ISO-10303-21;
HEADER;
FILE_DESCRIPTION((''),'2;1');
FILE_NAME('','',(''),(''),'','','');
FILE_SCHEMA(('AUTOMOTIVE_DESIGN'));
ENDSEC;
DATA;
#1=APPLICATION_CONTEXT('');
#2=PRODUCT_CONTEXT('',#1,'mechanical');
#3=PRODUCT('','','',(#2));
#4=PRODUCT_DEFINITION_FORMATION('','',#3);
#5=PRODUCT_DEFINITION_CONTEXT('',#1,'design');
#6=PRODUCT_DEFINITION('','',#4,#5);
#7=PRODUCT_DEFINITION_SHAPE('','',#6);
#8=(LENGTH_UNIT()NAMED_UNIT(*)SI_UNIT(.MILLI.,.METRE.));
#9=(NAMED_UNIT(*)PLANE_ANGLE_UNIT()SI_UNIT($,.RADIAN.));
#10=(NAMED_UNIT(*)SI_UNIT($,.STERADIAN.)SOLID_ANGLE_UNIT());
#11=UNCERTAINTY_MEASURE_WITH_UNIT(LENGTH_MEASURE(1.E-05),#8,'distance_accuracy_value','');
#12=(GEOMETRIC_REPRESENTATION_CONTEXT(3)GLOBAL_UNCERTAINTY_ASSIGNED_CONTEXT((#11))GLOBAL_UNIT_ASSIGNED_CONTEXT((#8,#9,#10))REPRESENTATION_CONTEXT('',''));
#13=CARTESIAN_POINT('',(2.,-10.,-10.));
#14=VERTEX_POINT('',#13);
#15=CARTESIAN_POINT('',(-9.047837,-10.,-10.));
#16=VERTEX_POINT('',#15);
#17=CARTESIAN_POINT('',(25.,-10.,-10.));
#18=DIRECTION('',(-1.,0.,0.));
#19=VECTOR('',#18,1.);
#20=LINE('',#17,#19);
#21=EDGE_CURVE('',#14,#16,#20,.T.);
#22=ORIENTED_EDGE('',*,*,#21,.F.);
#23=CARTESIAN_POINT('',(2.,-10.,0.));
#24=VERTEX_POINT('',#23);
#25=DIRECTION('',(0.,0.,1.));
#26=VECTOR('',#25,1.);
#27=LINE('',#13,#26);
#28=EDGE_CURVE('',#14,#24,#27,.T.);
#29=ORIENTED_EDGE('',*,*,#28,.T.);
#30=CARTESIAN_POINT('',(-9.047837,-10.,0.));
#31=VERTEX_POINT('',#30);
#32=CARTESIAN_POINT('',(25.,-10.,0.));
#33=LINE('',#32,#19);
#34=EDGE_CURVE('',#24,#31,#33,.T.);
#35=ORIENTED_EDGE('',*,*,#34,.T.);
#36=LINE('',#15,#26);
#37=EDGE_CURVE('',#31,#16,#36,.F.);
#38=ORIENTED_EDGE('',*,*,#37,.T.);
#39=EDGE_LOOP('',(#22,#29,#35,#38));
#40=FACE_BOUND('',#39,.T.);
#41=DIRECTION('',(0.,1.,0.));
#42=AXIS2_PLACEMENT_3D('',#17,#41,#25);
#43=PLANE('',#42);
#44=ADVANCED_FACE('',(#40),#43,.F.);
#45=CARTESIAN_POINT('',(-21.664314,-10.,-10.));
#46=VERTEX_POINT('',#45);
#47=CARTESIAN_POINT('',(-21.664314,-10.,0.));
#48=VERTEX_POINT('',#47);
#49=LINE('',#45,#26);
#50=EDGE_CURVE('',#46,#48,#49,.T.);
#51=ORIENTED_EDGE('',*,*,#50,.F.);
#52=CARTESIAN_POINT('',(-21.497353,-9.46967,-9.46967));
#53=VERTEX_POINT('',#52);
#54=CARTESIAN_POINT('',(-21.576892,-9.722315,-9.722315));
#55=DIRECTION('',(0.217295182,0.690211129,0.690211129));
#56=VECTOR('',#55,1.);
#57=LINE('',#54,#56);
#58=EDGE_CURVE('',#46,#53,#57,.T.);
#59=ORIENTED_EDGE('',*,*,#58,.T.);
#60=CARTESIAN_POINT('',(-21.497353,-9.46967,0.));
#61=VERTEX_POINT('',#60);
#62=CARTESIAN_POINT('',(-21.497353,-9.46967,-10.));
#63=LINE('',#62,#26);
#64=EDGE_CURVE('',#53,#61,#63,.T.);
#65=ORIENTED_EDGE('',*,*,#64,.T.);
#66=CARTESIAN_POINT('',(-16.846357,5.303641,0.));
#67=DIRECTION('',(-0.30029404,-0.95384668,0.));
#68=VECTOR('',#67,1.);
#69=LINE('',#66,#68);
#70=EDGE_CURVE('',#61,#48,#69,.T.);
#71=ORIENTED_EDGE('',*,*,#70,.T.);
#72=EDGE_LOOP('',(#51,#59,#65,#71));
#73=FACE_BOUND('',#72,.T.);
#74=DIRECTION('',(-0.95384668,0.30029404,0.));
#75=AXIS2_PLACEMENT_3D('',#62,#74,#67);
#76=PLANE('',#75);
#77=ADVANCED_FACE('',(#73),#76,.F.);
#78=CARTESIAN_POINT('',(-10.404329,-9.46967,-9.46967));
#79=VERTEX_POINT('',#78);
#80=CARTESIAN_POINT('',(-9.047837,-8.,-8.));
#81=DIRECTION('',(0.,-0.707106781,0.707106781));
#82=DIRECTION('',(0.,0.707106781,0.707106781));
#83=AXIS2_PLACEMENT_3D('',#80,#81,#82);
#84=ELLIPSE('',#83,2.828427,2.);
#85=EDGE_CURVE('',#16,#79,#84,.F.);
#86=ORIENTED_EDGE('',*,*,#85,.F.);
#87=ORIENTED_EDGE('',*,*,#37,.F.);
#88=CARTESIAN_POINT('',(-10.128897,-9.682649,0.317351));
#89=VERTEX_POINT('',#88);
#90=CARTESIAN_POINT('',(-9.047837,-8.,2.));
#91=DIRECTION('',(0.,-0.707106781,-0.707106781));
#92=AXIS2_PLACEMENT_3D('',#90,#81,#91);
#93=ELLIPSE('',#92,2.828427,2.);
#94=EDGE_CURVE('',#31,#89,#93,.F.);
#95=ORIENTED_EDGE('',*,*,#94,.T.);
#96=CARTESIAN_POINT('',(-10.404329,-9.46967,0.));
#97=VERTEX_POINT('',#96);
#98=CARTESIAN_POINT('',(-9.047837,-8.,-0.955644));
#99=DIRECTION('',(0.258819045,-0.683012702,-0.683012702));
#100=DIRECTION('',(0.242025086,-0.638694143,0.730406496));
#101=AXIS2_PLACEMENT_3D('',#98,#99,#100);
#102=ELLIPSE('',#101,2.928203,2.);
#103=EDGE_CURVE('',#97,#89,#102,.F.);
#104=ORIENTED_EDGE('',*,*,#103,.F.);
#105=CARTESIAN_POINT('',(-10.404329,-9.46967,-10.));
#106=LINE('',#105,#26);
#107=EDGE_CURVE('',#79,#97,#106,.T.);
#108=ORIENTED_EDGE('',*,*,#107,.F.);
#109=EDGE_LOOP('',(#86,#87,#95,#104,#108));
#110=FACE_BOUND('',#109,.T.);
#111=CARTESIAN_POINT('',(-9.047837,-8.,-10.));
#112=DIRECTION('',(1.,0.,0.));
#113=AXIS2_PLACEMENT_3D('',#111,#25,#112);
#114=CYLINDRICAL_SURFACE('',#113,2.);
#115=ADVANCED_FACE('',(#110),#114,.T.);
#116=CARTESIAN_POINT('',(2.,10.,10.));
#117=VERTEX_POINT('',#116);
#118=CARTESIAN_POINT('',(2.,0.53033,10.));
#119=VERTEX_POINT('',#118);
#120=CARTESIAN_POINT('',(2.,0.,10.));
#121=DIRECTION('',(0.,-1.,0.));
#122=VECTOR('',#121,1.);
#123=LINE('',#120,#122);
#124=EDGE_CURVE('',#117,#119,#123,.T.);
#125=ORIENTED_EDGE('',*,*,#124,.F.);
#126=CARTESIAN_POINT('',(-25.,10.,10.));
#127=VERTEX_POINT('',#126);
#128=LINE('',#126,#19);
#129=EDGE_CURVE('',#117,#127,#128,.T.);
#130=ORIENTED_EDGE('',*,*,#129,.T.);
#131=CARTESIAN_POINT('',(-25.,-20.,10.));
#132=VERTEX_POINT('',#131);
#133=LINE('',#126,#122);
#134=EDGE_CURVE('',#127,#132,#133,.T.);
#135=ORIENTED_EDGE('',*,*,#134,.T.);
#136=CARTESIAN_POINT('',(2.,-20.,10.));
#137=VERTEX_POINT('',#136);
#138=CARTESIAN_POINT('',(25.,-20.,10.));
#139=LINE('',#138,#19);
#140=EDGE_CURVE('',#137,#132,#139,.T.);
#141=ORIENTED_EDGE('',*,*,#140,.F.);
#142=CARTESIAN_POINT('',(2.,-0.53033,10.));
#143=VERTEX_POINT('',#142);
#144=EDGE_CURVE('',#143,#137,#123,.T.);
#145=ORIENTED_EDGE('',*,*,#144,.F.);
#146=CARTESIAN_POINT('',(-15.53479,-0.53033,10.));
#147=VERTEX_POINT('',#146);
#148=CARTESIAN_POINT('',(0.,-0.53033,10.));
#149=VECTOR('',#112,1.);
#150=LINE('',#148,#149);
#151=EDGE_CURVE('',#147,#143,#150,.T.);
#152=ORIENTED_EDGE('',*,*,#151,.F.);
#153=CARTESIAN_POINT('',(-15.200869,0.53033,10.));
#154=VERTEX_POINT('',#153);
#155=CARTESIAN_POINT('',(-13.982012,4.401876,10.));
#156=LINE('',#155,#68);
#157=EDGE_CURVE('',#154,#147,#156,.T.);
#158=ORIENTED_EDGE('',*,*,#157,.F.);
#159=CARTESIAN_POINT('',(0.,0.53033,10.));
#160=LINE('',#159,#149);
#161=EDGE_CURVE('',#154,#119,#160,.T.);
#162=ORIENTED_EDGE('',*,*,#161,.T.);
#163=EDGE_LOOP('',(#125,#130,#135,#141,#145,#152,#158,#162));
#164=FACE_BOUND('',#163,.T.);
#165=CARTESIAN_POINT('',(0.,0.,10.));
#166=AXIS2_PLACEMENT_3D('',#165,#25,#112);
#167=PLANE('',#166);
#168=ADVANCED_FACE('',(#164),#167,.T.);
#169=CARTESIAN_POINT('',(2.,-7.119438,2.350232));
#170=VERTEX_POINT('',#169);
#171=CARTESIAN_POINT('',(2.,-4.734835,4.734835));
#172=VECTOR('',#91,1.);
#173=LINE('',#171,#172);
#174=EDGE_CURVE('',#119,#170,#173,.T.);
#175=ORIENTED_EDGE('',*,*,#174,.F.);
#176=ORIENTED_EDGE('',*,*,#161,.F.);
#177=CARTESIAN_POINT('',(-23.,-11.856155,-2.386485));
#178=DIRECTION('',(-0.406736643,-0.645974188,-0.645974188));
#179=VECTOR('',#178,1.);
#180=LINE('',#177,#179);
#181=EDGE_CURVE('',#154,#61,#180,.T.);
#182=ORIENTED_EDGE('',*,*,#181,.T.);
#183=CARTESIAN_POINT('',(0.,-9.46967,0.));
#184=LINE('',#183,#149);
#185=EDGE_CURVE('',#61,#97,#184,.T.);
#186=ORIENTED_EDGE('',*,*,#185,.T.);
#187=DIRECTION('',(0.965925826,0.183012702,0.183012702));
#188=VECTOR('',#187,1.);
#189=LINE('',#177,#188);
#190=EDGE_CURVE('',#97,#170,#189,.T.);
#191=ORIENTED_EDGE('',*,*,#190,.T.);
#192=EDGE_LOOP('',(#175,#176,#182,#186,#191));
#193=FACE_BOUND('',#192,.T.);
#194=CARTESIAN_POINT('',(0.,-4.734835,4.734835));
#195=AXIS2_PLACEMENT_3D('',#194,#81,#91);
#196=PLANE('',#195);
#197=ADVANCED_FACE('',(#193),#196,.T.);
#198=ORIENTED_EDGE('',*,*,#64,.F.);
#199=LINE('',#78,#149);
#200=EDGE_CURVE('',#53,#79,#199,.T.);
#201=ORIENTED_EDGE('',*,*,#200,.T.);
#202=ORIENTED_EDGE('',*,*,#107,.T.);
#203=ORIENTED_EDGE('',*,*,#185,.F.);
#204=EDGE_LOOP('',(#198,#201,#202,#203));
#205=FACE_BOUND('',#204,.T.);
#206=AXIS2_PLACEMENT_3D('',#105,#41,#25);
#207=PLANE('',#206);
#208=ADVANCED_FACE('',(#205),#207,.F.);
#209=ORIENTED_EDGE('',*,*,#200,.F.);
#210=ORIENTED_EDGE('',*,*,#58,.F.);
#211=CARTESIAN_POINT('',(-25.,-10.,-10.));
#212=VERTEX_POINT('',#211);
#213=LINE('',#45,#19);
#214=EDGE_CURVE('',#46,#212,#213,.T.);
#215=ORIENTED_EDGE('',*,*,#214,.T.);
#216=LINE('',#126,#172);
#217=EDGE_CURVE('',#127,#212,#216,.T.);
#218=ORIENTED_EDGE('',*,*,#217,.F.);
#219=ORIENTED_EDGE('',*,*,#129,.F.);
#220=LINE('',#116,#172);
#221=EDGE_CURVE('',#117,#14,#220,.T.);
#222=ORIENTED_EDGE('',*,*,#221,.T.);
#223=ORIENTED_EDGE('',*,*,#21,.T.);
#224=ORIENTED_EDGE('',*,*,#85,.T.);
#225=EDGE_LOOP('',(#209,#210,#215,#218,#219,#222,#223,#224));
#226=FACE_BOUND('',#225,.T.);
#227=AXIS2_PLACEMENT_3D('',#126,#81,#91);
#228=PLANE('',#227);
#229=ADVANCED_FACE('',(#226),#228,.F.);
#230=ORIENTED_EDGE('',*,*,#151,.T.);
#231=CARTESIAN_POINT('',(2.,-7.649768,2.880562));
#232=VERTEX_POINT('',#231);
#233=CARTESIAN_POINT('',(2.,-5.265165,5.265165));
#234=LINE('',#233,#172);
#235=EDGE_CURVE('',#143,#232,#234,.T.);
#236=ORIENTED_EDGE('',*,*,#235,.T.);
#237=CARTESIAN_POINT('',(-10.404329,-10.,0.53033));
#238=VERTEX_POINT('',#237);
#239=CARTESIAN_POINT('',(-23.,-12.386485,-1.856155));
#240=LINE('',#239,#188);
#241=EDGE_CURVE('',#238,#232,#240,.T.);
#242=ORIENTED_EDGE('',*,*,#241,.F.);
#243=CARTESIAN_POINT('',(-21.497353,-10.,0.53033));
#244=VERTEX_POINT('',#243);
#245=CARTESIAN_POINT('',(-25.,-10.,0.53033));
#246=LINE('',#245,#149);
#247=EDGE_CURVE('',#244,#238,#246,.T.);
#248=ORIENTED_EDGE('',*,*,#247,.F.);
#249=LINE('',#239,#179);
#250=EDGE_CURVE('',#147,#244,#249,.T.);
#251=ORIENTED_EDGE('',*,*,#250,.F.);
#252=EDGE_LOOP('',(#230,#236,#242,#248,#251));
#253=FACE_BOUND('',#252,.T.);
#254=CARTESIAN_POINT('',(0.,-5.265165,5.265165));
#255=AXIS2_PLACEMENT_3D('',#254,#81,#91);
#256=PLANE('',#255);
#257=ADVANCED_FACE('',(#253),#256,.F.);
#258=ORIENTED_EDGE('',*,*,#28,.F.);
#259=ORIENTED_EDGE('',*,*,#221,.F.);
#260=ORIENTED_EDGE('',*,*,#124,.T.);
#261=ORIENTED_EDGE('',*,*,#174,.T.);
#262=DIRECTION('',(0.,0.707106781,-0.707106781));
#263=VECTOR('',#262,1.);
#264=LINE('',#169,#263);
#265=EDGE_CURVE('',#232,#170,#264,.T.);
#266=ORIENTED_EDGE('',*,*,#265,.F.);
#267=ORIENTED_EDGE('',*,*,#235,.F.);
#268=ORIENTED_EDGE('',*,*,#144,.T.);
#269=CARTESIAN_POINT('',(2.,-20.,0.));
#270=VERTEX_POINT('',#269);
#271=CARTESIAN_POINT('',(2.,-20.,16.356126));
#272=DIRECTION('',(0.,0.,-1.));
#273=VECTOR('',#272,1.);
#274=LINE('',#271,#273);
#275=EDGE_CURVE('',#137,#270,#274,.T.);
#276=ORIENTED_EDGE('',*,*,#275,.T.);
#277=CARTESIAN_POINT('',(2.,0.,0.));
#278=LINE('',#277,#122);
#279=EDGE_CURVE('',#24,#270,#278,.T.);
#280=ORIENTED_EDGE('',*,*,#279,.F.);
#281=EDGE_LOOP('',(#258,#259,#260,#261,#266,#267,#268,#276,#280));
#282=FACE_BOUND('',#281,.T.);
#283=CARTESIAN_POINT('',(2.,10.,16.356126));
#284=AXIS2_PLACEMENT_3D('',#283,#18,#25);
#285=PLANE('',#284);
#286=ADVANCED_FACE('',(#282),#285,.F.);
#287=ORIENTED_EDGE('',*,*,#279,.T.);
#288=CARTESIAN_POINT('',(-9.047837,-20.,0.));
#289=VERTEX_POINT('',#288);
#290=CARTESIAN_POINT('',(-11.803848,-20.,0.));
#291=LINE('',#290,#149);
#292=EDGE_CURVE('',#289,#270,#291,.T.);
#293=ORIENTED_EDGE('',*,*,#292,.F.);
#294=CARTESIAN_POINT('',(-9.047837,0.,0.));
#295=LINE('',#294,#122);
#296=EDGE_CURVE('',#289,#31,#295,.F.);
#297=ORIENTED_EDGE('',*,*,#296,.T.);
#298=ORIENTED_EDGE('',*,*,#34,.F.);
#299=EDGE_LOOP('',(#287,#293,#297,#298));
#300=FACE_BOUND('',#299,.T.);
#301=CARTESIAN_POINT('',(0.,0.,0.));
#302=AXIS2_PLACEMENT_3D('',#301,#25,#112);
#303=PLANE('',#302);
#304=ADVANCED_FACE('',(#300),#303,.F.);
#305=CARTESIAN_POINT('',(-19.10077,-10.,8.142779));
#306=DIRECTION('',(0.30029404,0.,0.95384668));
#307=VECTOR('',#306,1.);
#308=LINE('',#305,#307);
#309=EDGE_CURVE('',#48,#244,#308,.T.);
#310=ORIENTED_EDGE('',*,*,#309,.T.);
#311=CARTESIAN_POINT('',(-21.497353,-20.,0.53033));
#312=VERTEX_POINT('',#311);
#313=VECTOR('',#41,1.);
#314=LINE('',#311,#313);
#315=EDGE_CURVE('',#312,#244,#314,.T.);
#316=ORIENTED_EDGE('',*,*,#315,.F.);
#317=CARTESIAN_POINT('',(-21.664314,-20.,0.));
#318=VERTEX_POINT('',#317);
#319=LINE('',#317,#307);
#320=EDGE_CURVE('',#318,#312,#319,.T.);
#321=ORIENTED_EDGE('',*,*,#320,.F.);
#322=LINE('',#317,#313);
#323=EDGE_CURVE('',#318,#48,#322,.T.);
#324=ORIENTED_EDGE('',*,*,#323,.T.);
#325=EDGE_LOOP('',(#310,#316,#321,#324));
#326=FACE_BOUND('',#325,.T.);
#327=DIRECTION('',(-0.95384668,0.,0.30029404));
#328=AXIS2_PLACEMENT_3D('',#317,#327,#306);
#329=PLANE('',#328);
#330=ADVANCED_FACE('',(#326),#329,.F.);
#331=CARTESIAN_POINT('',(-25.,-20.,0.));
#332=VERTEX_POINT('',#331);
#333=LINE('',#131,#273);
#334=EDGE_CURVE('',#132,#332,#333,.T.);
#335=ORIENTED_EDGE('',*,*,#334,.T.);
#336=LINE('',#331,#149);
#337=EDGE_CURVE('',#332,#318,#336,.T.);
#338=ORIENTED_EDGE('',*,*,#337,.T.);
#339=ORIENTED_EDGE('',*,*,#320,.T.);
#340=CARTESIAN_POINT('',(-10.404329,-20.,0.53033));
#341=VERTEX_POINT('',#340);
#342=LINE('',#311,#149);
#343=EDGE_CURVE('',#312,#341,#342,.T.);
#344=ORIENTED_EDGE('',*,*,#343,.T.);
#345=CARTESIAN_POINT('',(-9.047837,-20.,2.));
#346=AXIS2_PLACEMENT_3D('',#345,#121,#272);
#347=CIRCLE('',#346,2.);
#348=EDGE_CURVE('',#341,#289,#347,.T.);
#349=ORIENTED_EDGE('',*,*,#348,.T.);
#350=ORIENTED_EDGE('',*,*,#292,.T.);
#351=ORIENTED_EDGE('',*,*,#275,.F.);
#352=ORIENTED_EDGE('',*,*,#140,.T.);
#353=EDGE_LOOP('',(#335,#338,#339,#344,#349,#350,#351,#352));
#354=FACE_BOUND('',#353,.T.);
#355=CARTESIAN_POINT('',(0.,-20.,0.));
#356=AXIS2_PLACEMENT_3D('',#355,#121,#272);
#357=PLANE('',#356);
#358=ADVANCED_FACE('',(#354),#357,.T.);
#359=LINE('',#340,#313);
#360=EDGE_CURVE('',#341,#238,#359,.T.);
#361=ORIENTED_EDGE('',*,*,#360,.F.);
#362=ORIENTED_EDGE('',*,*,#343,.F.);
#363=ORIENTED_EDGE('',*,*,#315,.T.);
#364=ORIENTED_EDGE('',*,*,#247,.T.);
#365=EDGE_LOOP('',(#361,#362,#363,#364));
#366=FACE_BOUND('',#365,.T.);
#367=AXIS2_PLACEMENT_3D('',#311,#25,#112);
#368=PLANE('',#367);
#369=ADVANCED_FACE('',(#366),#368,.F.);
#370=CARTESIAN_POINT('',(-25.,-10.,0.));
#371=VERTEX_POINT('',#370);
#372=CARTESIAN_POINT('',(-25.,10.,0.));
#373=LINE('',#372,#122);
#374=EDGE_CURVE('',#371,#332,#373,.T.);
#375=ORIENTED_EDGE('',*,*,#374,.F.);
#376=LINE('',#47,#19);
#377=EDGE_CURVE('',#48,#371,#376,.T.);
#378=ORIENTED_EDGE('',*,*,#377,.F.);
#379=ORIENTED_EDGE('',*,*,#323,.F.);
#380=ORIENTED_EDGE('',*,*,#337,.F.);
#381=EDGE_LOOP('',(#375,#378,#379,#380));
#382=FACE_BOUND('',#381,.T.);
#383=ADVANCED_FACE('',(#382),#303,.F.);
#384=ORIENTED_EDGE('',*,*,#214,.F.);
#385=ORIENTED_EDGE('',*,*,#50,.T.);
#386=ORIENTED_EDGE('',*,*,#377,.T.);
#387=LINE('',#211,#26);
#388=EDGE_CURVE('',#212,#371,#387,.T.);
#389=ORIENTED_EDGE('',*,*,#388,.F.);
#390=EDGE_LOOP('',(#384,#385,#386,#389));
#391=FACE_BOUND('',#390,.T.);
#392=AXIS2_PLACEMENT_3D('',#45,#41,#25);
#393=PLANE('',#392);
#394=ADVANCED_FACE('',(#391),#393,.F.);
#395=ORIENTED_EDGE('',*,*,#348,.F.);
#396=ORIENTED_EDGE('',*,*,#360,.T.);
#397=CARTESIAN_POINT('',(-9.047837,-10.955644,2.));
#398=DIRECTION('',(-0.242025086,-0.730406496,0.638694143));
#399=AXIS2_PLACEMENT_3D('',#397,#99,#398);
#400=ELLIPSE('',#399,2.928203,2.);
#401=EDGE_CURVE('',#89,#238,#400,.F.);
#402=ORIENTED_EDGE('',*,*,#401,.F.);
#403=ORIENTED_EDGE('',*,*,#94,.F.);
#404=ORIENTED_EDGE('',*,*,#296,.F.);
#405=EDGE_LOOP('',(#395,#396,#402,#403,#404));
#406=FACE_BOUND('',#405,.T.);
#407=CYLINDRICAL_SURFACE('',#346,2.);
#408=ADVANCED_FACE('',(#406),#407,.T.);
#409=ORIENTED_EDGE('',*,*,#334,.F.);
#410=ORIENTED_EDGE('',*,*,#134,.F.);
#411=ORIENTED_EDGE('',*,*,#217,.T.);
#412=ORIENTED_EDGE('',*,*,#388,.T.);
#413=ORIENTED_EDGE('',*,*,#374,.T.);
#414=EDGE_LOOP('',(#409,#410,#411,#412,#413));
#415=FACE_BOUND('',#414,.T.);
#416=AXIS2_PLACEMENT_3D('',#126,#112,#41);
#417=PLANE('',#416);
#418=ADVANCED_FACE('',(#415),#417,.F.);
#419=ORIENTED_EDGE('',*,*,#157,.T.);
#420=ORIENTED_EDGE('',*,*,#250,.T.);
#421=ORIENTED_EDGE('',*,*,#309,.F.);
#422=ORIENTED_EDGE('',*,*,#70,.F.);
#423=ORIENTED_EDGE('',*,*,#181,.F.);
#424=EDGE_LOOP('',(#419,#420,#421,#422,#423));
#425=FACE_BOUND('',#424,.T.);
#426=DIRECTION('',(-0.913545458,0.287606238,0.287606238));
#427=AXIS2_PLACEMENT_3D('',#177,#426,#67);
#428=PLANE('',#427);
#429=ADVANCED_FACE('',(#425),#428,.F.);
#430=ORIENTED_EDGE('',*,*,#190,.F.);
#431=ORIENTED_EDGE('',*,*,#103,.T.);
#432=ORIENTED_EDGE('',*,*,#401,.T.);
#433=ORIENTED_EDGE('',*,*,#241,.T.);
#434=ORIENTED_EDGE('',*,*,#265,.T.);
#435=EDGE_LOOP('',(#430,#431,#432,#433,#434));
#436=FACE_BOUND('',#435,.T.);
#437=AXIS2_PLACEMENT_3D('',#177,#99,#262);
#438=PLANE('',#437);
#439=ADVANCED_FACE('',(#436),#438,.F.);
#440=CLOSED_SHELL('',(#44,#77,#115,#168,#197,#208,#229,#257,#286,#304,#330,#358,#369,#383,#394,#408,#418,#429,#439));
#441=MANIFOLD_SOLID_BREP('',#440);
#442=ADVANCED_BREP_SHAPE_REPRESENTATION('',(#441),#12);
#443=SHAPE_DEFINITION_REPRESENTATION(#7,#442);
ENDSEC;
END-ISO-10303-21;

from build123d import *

# Parameters (mm, degrees)
SKETCH1_W           = 50
SKETCH1_H           = 20
BOSS_EXTRUDE1_DEPTH = 10
CUT_EXTRUDE1_DEPTH  = 0.375
BOSS_EXTRUDE3_DEPTH = 10
BOSS_EXTRUDE4_DEPTH = 10
SKETCH5_W           = 25.687022838
SKETCH5_H           = 30.894675689
CUT_EXTRUDE3_DEPTH  = 41.311288741
CUT_EXTRUDE4_DEPTH  = 36.057096286
FILLET1_R           = 2
FILLET2_R           = 2


with BuildPart() as part:
    # Sketch1 → Boss-Extrude1 (new body)
    with BuildSketch(Plane.XY):
        Rectangle(SKETCH1_W, SKETCH1_H)
    extrude(amount=BOSS_EXTRUDE1_DEPTH)

    # Sketch2 → Cut-Extrude1 (cut, symmetric)
    with BuildSketch(Plane(origin=(0, -5, 5), x_dir=(1, 0, 0), z_dir=(0, -0.7071067811865464, 0.7071067811865488))):
        Polygon((-23, -10.071067812), (35.375550351, 5.570613762), (29.163893269, 28.752833593), (-10.439065609, 18.141252744), align=None)
    extrude(amount=CUT_EXTRUDE1_DEPTH, both=True, mode=Mode.SUBTRACT)

    # Sketch3 → Boss-Extrude3 (add)
    with BuildSketch(Plane.XZ.offset(10)):
        Polygon((-25, 0), (-21.664313944, 0), (-21.497353187, 0.530330086), (-10.404328524, 0.530330086), (-11.803847577, 0), (25, 0), (25, 10), (-25, 10), align=None)
    extrude(amount=BOSS_EXTRUDE3_DEPTH)

    # Sketch4 → Boss-Extrude4 (add)
    with BuildSketch(Plane(origin=(0, 0, 0), x_dir=(-1, 0, 0), z_dir=(0, 0, -1))):
        Polygon((10.404328524, -9.469669914), (21.497353187, -9.469669914), (21.664313944, -10), (25, -10), (25, 10), (-25, 10), (-25, -10), (11.803847577, -10), align=None)
    extrude(amount=BOSS_EXTRUDE4_DEPTH)

    # Sketch5 → Cut-Extrude3 (cut, through all)
    with BuildSketch(Plane.XZ.offset(20)):
        with Locations((14.843511419, 0.908787841)):
            Rectangle(SKETCH5_W, SKETCH5_H)
    extrude(amount=-CUT_EXTRUDE3_DEPTH, mode=Mode.SUBTRACT)

    # Sketch6 → Cut-Extrude4 (cut, through all)
    with BuildSketch(Plane(origin=(2, 0, 0), x_dir=(0, 0, -1), z_dir=(1, 0, 0))):
        Polygon((-10, 10), (10, -10), (10, 10), align=None)
    extrude(amount=-CUT_EXTRUDE4_DEPTH, mode=Mode.SUBTRACT)

    # Fillet1
    # the kernel refuses this fillet: 2 mm, written as the material it takes off along each edge
    with BuildSketch(Plane(origin=(-11.803847577, -10, 0), x_dir=(1, 0, 0), z_dir=(0, 0, -1))) as fillet1_piece_1:
        with BuildLine():
            CenterArc((2.756010978, -2), FILLET1_R, 90, 42.706727968)
            Line((1.399519053, -0.530330086), (0, 0))
            Line((0, 0), (2.756010978, 0))
        make_face()
    extrude(amount=16.890027445, mode=Mode.SUBTRACT)

    # Fillet2
    # the kernel refuses this fillet: 2 mm, written as the material it takes off along each edge
    with BuildSketch(Plane(origin=(-11.803847577, -3.109972555, 0), x_dir=(1, 0, 0), z_dir=(0, -1, 0))) as fillet2_piece_1_section:
        with BuildLine():
            CenterArc((2.756010978, 2), FILLET2_R, 227.293272032, 42.706727968)
            Line((1.399519053, 0.530330086), (0, 0))
            Line((0, 0), (2.756010978, 0))
        make_face()
    fillet2_piece_1 = extrude(amount=23.780054891, mode=Mode.PRIVATE)
    fillet2_piece_1 = split(fillet2_piece_1, bisect_by=Plane(origin=(-9.777530732, -9.469669914, 0.133569591), z_dir=(0, -1, 0)), keep=Keep.TOP, mode=Mode.PRIVATE)
    fillet2_piece_1 = fillet2_piece_1 - Plane(origin=(-9.047836599, -8, 0.133569591), x_dir=(1, 0, 0), z_dir=(0, 0, 1)) * Cylinder(2, 59, mode=Mode.PRIVATE)
    add(fillet2_piece_1, mode=Mode.SUBTRACT)


solid = part.part
